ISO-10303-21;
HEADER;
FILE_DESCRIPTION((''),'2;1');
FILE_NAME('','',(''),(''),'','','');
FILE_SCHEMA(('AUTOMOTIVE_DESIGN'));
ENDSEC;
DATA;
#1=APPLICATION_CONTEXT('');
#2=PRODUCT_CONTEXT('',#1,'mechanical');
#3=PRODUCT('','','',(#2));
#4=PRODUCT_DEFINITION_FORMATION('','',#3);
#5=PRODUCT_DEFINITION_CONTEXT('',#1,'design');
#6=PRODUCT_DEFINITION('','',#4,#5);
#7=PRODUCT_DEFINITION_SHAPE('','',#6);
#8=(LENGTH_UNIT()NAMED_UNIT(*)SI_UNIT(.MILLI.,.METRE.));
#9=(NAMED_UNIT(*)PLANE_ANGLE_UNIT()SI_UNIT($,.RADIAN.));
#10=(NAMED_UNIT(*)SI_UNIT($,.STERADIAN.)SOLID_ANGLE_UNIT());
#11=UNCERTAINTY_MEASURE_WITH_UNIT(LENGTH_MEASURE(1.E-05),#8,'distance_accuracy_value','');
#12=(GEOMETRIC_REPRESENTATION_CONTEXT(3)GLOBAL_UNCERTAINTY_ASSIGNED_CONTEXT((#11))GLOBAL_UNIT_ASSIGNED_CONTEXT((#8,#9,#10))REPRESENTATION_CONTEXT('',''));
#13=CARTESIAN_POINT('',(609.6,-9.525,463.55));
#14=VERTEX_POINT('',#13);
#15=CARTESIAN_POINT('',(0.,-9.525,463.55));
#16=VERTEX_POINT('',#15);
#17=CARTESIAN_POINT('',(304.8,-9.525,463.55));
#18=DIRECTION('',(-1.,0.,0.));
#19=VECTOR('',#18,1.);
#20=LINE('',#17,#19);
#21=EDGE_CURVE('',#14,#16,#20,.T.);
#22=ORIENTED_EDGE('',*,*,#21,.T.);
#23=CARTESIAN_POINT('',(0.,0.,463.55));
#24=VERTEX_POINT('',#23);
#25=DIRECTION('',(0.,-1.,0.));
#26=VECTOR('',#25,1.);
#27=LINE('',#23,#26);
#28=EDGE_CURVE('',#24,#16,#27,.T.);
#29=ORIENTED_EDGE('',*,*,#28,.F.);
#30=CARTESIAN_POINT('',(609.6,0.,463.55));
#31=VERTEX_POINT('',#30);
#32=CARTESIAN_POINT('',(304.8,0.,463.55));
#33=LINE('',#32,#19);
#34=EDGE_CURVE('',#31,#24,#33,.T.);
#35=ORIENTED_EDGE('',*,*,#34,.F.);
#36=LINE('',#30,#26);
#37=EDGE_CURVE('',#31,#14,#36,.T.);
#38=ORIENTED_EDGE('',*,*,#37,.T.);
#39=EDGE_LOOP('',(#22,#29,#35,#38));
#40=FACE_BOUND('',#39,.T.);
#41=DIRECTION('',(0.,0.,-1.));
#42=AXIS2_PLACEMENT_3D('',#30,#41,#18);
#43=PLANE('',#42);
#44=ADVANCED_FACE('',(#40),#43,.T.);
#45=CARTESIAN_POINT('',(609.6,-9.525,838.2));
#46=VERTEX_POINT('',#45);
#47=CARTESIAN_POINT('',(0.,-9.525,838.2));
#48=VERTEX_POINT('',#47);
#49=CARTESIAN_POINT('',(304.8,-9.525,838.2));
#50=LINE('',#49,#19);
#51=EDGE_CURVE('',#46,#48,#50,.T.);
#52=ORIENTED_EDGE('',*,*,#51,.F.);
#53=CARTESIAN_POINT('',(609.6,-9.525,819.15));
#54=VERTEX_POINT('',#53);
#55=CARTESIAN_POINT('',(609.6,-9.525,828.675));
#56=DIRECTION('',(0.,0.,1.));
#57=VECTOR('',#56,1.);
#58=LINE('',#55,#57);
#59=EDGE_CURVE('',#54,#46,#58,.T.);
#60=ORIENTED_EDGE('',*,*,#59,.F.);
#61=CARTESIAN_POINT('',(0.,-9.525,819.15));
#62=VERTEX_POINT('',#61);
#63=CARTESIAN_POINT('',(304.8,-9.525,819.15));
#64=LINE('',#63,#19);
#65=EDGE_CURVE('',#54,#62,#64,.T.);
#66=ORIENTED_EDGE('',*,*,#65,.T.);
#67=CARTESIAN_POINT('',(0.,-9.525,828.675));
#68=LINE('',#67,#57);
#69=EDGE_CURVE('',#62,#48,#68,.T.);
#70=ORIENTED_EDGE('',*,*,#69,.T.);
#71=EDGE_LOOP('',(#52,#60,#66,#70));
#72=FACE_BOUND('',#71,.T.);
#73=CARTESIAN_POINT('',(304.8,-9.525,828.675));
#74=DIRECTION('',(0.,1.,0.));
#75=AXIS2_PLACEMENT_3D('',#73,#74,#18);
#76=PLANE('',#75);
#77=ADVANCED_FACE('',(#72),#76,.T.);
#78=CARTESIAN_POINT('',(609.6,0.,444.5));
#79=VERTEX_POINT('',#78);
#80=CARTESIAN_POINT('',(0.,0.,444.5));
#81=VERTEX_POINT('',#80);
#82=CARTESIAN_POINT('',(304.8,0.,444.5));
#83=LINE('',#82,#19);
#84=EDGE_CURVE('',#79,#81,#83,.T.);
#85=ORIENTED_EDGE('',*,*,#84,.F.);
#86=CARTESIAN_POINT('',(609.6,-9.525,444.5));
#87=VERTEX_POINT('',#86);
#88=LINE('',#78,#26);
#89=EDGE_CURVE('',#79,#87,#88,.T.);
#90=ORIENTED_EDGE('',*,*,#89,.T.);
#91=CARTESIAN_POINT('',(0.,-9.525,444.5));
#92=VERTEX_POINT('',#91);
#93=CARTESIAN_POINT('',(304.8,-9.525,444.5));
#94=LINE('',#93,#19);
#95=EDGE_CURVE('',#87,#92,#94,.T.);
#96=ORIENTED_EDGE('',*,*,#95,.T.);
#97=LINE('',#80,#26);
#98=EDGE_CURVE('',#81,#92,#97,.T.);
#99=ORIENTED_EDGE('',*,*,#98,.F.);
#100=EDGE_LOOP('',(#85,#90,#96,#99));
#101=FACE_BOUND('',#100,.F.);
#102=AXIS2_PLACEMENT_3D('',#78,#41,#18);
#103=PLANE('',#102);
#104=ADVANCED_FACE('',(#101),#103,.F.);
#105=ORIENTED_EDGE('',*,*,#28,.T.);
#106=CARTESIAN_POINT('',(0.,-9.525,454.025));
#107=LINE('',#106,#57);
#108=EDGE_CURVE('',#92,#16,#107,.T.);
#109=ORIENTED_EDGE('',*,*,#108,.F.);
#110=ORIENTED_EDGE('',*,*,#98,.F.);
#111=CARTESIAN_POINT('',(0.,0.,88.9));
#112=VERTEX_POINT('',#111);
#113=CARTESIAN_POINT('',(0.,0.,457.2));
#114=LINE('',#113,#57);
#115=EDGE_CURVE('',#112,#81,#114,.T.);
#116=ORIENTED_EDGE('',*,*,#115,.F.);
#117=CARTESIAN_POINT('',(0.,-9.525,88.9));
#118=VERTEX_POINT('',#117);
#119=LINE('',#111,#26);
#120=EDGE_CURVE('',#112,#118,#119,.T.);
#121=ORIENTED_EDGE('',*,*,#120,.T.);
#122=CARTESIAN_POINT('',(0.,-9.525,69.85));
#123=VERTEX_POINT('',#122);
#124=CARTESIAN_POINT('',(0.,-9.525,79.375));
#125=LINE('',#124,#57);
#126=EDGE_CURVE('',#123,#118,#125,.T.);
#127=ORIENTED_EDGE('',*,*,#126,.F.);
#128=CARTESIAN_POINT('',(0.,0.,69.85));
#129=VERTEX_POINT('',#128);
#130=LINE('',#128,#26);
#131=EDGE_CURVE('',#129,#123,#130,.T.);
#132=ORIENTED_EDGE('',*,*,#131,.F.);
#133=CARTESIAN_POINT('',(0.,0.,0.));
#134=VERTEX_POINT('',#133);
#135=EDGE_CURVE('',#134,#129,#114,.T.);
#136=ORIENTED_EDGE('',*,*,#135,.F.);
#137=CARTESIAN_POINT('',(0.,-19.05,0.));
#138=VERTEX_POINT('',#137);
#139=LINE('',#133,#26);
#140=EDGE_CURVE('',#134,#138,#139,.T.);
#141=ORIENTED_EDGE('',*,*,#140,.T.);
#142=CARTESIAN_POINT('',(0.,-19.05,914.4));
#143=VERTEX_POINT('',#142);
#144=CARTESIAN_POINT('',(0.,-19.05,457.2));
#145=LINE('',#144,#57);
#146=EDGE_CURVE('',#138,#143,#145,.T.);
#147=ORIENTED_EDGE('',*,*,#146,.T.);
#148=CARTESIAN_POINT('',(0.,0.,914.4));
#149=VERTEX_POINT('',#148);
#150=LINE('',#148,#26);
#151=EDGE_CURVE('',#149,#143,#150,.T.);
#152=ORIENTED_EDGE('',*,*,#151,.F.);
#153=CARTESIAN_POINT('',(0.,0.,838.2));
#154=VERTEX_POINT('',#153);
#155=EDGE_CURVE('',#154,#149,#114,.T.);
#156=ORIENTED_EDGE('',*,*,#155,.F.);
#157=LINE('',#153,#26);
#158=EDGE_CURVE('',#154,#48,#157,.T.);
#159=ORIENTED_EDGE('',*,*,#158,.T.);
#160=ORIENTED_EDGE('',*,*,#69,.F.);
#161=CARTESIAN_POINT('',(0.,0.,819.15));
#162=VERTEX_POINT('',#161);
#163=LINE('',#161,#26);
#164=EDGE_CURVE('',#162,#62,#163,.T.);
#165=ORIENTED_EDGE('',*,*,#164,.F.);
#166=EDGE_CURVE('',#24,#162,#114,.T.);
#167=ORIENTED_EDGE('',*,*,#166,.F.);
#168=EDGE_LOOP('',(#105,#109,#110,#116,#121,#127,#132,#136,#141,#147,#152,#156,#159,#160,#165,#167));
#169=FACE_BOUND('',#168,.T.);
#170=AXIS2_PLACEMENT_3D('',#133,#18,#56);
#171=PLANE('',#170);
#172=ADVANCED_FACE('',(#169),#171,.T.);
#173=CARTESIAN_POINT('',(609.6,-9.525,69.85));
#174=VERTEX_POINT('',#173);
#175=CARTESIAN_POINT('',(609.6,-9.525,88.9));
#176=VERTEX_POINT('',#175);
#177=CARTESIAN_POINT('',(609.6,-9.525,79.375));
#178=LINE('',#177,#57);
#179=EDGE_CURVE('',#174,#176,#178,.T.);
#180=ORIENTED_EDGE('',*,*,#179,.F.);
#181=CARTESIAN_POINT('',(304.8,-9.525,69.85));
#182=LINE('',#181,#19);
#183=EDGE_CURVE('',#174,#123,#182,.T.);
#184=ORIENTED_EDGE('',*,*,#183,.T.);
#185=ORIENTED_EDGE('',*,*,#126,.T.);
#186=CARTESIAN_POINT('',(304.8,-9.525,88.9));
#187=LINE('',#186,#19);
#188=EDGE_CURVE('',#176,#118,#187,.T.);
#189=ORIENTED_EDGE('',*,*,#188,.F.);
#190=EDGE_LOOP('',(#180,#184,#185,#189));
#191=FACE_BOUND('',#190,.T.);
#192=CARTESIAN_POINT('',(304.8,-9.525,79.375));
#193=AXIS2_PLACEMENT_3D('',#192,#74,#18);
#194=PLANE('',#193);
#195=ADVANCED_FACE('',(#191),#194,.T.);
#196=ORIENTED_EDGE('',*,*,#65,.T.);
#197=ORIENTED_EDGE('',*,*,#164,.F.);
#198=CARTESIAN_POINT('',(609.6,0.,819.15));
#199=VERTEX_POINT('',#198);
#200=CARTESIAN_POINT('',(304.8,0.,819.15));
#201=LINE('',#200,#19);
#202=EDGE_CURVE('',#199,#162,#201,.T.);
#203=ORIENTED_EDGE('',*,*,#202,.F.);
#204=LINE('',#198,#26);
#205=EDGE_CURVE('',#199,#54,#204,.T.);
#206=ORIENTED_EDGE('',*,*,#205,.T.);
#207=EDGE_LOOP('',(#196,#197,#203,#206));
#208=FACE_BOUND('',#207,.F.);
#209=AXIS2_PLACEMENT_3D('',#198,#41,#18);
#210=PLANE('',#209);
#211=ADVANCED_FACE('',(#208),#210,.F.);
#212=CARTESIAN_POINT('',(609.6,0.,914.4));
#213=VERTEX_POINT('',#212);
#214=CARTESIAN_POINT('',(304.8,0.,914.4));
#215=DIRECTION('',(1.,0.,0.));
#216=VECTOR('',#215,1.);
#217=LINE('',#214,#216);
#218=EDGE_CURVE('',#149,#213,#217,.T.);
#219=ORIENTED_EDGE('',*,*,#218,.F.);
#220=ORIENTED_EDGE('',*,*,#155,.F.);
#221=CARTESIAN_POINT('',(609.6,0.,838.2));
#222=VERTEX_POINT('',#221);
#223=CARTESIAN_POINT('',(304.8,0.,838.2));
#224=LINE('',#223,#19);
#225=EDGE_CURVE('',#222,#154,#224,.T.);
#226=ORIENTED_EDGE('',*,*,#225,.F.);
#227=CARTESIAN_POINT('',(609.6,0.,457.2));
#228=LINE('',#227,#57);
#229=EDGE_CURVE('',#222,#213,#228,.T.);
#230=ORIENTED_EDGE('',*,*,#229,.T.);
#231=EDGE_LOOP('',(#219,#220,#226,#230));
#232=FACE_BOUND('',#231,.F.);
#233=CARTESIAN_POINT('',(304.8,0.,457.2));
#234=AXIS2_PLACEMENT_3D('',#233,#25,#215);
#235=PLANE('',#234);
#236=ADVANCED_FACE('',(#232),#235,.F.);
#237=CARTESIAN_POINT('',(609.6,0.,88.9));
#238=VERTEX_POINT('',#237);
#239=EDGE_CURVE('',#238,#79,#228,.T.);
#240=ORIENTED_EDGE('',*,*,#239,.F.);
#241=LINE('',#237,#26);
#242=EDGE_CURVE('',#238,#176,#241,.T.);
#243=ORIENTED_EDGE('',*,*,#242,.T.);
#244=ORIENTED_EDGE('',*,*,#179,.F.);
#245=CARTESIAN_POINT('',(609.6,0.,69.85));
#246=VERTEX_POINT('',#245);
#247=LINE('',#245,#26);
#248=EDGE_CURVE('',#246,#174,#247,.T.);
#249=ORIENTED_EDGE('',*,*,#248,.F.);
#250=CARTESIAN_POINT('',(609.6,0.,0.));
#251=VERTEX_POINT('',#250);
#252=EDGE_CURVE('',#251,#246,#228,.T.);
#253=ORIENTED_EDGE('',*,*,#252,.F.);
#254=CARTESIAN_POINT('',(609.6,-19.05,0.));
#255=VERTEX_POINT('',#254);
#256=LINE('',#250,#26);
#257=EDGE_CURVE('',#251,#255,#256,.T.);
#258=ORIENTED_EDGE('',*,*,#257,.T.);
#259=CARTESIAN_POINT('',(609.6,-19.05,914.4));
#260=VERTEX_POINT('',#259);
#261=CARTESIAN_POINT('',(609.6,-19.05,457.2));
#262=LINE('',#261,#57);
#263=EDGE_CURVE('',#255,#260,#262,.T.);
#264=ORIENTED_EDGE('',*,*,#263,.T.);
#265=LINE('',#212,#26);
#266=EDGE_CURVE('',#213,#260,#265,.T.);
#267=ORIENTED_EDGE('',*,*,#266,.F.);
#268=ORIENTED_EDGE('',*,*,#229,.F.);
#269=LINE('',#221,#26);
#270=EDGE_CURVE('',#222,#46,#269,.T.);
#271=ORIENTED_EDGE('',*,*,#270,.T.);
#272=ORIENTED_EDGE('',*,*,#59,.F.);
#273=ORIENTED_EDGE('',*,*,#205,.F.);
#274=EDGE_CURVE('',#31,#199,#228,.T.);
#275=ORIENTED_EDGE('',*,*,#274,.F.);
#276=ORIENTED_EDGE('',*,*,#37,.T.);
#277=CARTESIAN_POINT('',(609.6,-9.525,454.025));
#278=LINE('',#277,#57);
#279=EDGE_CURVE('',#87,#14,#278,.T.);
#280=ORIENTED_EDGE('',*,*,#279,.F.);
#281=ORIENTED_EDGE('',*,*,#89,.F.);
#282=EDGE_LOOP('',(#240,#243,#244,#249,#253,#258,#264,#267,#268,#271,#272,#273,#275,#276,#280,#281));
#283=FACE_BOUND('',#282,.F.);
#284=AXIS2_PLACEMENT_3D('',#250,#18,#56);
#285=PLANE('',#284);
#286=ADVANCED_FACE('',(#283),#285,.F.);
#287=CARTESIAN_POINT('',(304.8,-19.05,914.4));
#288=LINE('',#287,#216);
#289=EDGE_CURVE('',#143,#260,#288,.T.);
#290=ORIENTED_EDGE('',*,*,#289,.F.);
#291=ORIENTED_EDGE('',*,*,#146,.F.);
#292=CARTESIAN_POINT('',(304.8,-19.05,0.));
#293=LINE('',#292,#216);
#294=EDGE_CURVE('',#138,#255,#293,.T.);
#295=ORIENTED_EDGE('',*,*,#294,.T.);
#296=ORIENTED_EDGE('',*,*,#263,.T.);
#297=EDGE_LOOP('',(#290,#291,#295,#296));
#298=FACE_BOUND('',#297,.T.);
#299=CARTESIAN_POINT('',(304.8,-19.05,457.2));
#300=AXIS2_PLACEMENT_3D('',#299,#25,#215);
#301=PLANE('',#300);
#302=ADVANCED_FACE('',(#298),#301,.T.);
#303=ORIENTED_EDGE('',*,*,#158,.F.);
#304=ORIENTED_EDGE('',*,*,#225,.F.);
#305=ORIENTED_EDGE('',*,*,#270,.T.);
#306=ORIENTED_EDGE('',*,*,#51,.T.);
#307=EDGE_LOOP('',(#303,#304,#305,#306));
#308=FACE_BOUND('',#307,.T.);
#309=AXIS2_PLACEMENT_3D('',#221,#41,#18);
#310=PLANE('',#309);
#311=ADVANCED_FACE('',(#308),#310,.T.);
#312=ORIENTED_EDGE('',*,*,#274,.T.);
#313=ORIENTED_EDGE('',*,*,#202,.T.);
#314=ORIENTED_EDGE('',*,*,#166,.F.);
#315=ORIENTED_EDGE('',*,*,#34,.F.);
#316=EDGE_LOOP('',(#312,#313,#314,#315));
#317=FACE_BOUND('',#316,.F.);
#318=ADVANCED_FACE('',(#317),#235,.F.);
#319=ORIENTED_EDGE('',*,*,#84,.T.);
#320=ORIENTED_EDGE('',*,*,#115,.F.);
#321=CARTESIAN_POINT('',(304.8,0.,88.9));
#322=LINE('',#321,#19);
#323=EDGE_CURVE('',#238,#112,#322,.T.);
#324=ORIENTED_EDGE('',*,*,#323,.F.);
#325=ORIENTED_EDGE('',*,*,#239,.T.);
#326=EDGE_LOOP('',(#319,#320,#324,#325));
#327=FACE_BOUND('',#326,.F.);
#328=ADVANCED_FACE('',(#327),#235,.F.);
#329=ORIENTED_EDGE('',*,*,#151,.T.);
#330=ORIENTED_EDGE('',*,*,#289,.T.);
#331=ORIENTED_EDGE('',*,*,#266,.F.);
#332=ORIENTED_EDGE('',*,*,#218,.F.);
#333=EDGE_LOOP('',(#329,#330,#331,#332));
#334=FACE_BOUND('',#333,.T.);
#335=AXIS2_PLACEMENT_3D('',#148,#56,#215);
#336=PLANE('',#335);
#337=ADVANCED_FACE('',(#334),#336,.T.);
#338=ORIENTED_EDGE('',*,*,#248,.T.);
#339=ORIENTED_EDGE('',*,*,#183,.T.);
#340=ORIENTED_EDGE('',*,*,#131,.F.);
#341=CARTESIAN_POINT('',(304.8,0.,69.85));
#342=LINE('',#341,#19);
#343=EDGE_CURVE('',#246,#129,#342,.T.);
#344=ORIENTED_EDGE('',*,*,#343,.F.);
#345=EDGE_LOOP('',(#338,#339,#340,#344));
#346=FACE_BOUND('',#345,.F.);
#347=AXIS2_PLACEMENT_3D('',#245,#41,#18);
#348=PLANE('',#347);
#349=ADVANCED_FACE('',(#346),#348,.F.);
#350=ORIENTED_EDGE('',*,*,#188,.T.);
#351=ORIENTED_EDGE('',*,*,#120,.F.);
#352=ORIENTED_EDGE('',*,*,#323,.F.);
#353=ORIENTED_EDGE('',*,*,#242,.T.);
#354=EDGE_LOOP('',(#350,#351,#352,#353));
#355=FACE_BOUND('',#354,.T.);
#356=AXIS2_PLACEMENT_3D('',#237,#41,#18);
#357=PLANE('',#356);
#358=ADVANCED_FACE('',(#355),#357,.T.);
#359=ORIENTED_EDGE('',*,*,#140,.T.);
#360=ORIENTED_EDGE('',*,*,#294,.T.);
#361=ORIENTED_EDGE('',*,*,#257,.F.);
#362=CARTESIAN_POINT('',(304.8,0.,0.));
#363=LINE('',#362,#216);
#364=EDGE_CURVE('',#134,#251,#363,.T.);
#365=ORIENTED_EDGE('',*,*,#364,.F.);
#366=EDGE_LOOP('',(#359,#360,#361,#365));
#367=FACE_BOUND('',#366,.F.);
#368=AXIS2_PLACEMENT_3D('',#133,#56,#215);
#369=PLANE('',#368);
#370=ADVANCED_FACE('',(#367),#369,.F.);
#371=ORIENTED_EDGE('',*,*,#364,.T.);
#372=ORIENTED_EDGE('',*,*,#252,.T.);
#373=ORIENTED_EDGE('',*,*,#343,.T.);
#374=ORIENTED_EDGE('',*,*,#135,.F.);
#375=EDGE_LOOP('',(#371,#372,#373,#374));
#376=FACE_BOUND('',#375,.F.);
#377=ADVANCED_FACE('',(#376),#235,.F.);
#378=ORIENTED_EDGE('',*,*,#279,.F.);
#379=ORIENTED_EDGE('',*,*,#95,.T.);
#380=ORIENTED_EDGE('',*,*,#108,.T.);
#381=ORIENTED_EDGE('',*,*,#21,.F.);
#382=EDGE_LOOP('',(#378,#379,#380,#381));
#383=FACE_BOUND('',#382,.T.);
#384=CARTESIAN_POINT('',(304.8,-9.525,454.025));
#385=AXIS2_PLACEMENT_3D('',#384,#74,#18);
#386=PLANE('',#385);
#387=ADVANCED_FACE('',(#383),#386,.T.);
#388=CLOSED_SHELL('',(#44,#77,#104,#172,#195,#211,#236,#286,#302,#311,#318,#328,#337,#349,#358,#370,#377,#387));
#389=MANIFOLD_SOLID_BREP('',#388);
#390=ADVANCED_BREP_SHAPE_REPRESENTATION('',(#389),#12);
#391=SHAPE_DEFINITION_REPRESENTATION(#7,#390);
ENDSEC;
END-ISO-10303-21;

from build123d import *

# Parameters (mm, degrees)
F0_W     = 609.6
F0_H     = 914.4
F1_DEPTH = 19.05
F2_W     = 609.6
F2_H     = 19.05
F3_DEPTH = 9.525


# Not quite as in the source:
# - a length typed as a fraction of an inch, garbled in the dataset ("3 / 203.2 mm" for 3/8 in), is restored


with BuildPart() as f1:
    # F0 (on Front) → F1 (new body)
    with BuildSketch(Plane.XZ):
        with Locations((304.8, 457.2)):
            Rectangle(F0_W, F0_H)
    extrude(amount=F1_DEPTH)

    # F2 (on face) → F3 (cut)
    with BuildSketch(Plane(origin=(0, 0, 0), x_dir=(-1, 0, 0), z_dir=(0, 1, 0))):
        with Locations((-304.8, 79.375)):
            Rectangle(F2_W, F2_H)
        with Locations((-304.8, 454.025)):
            Rectangle(F2_W, F2_H)
        with Locations((-304.8, 828.675)):
            Rectangle(F2_W, F2_H)
    extrude(amount=-F3_DEPTH, mode=Mode.SUBTRACT)


solid = f1.part
